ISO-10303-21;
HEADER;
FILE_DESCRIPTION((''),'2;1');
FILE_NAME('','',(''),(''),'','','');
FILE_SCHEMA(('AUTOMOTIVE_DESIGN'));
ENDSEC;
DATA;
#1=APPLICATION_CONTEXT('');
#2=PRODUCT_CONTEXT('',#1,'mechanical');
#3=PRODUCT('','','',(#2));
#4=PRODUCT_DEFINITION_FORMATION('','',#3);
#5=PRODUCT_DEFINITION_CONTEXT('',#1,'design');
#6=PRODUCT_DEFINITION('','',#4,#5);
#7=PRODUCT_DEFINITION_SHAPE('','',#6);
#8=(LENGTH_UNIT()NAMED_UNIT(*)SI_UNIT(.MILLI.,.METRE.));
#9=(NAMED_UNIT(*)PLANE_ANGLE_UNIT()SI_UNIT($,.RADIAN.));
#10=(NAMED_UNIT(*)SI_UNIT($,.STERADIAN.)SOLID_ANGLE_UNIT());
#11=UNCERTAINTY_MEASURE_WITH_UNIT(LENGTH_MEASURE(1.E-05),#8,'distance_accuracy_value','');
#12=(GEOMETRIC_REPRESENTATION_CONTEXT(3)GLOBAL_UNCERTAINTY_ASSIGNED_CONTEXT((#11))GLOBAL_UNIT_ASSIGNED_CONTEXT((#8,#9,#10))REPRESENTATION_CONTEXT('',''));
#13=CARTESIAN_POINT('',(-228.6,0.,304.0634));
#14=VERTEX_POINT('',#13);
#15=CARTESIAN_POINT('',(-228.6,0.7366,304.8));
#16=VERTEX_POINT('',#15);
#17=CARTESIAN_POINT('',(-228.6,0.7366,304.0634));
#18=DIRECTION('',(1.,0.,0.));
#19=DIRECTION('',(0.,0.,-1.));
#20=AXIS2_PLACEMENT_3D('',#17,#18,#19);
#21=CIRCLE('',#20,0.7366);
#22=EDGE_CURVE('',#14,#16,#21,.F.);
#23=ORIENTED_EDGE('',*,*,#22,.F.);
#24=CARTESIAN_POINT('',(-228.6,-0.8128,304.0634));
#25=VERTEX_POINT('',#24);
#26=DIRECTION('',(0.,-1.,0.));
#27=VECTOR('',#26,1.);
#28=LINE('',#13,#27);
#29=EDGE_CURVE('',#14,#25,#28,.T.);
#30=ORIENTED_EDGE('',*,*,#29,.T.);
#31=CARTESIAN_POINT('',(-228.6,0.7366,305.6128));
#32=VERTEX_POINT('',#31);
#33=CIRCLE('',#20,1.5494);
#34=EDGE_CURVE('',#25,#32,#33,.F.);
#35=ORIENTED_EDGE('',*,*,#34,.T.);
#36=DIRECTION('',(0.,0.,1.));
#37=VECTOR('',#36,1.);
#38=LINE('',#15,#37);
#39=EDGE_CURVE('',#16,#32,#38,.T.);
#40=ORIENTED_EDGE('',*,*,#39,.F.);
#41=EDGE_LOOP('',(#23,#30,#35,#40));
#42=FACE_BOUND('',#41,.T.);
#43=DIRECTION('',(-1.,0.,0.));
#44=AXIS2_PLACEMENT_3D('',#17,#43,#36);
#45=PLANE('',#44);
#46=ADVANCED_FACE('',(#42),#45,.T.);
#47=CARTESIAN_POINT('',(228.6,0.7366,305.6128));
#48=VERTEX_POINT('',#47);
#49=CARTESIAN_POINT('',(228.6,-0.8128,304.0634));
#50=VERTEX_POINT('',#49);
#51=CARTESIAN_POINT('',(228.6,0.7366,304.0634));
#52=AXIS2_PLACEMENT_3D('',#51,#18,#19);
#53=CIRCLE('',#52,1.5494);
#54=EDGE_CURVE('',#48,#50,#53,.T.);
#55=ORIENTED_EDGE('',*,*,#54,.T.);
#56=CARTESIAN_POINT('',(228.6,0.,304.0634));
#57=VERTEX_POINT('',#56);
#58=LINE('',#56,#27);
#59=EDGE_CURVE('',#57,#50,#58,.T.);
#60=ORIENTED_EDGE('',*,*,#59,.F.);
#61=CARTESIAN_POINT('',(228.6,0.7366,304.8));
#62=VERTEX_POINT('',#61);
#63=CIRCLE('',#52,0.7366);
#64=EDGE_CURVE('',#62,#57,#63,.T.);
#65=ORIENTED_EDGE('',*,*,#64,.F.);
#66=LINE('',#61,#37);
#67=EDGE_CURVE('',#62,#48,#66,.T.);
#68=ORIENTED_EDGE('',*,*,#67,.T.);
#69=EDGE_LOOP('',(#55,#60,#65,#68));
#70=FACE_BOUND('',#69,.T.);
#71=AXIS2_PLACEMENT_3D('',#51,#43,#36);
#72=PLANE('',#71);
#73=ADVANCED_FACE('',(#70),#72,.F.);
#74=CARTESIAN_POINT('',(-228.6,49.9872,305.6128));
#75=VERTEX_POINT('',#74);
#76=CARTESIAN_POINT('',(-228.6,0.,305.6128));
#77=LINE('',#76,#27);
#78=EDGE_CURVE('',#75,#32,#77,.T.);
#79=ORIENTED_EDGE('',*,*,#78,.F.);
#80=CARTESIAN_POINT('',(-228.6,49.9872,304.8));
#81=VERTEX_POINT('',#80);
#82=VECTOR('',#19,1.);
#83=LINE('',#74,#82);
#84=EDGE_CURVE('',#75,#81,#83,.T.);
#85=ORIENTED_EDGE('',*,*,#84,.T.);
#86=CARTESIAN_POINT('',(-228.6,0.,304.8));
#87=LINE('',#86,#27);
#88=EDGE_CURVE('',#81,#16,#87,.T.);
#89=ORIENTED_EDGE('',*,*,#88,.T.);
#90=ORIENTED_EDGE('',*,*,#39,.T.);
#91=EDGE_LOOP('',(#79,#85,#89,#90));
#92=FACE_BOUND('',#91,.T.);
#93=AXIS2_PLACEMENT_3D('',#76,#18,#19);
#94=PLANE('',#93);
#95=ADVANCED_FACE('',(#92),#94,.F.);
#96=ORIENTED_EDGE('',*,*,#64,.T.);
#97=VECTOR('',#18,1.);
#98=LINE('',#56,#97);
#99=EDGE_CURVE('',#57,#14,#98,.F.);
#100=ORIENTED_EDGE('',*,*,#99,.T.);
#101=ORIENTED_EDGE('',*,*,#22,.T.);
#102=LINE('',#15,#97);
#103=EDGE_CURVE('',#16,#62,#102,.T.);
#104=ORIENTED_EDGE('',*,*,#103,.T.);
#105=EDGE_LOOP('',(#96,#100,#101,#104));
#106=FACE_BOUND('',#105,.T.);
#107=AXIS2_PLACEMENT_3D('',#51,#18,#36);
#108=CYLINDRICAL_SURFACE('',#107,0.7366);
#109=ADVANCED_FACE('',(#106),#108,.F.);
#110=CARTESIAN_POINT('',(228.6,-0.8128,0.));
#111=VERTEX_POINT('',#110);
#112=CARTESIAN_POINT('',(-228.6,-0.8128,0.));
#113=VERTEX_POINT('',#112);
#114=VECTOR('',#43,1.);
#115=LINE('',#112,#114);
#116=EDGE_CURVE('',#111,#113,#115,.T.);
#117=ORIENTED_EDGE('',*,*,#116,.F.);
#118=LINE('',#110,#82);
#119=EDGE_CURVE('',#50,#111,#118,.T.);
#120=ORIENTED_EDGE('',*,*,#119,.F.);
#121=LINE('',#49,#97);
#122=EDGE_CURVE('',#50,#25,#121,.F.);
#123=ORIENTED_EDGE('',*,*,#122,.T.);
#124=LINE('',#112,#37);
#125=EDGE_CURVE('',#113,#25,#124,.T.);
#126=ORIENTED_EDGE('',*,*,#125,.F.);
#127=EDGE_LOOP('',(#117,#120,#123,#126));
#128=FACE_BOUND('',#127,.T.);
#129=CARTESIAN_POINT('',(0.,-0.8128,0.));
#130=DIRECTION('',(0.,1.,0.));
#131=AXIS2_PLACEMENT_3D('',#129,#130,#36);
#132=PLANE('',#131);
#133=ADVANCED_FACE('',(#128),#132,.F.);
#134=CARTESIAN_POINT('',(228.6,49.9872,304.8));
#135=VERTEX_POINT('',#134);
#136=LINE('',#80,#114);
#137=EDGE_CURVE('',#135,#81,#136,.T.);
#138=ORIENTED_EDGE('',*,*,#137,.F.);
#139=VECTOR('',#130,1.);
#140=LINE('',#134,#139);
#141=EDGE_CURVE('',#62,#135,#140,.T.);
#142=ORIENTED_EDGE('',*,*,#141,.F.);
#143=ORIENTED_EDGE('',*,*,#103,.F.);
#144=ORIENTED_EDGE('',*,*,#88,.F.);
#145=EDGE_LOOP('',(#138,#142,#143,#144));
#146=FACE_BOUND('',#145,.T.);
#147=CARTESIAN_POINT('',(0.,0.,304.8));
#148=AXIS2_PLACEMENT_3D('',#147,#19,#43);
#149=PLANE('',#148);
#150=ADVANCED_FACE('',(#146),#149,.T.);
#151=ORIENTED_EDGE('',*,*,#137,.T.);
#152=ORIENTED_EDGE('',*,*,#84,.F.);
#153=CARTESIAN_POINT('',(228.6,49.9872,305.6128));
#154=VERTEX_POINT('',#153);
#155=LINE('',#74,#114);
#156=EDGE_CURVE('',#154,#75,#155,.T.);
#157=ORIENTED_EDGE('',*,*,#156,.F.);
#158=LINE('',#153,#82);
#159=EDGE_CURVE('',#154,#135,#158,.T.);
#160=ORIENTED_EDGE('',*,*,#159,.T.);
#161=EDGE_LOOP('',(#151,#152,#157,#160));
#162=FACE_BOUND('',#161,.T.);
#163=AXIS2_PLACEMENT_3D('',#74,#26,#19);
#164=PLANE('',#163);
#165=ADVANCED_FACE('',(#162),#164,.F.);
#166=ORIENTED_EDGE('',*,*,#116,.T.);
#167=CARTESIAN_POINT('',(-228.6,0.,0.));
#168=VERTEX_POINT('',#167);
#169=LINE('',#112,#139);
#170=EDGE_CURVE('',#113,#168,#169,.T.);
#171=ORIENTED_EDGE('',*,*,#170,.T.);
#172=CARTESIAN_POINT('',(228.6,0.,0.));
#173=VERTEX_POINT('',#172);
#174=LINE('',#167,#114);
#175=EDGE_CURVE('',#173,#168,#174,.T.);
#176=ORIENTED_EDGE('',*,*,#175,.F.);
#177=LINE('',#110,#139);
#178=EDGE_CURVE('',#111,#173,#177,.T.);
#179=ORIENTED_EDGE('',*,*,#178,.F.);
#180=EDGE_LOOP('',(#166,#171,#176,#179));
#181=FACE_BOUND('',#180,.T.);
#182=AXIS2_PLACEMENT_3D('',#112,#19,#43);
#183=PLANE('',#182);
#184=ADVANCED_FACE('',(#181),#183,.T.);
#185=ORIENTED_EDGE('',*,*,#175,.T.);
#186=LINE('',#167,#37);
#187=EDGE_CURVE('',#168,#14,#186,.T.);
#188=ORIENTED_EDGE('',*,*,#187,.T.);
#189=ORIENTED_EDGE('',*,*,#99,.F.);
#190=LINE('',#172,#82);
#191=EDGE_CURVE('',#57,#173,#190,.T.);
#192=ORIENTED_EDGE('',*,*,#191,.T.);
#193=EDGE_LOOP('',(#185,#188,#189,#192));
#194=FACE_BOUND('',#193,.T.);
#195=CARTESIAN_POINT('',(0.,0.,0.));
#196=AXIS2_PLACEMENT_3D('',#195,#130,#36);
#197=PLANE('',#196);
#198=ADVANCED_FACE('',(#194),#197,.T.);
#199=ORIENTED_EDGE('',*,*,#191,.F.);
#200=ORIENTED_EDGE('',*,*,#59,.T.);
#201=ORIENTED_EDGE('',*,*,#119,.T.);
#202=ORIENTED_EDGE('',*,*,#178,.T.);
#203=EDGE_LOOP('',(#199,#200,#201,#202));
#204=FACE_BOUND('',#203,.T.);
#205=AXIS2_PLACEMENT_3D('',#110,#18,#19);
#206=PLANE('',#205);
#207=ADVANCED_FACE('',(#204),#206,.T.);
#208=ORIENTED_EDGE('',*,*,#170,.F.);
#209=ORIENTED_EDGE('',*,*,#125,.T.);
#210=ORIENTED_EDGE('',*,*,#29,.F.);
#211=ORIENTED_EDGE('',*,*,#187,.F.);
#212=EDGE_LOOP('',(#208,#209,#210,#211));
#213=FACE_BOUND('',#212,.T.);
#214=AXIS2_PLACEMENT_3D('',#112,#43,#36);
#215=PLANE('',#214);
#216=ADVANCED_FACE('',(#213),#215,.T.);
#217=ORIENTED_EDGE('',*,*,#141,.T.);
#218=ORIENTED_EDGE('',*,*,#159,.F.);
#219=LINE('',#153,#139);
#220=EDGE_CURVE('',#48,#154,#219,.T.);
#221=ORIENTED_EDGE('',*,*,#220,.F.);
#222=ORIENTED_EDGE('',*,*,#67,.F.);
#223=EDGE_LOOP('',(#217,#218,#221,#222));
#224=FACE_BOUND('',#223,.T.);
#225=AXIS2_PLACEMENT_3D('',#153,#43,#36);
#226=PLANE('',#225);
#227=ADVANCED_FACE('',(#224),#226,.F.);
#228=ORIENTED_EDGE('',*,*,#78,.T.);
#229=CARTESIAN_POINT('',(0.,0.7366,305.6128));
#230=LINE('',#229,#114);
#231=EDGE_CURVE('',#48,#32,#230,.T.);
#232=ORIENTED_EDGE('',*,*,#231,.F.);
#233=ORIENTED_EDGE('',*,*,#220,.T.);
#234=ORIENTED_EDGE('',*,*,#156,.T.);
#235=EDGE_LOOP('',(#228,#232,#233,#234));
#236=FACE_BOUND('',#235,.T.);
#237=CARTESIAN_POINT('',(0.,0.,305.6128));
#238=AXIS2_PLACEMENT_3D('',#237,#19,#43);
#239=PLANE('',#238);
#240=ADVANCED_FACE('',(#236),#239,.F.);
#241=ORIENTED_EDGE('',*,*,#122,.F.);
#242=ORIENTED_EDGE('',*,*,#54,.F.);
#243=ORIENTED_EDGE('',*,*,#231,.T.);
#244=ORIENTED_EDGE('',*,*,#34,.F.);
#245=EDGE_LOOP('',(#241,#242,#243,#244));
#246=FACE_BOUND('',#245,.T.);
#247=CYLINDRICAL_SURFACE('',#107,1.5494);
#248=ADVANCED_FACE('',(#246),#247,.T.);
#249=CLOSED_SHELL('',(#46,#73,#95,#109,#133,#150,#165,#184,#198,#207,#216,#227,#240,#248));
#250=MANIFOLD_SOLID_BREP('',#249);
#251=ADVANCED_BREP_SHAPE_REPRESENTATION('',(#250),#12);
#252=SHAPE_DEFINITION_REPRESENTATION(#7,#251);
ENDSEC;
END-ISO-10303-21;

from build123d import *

# Parameters (mm, degrees)
SKETCH1_W                    = 457.2
SKETCH1_H                    = 304.8
BASE_FLANGE1_DEPTH           = 0.8128
EDGE_FLANGE1_STRIP_W         = 4.7244
EDGE_FLANGE1_STRIP_H         = 0.8128
EDGE_FLANGE1_STRIP_CUT_DEPTH = 457.2
EDGE_FLANGE1_DEPTH           = 457.2


# Sheet-metal steps are written as plain solids
with BuildPart() as part:
    # Sketch1 → Base-Flange1 (new body)
    with BuildSketch(Plane(origin=(0, 0, 0), x_dir=(1, 0, 0), z_dir=(0, 1, 0))):
        with Locations((0, -152.4)):
            Rectangle(SKETCH1_W, SKETCH1_H)
    extrude(amount=-BASE_FLANGE1_DEPTH)

    # Edge-Flange1 strip (across the edge) → Edge-Flange1 strip cut (cut)
    with BuildSketch(Plane(origin=(-228.6, 0, 304.8), x_dir=(0, 0, -1), z_dir=(1, 0, 0))):
        with Locations((-1.6256, -0.4064)):
            Rectangle(EDGE_FLANGE1_STRIP_W, EDGE_FLANGE1_STRIP_H)
    extrude(amount=EDGE_FLANGE1_STRIP_CUT_DEPTH, mode=Mode.SUBTRACT)

    # Edge-Flange1 section (across the edge) → Edge-Flange1 (add)
    with BuildSketch(Plane(origin=(-228.6, 0, 304.8), x_dir=(0, 0, -1), z_dir=(1, 0, 0))):
        with BuildLine():
            Line((-0.8128, 0.7366), (-0.8128, 49.9872))
            Line((-0.8128, 49.9872), (0, 49.9872))
            Line((0, 49.9872), (0, 0.7366))
            ThreePointArc((0, 0.7366), (0.215745145, 0.215745145), (0.7366, 0))
            Line((0.7366, 0), (0.7366, -0.8128))
            ThreePointArc((0.7366, -0.8128), (-0.358991247, -0.358991247), (-0.8128, 0.7366))
        make_face()
    extrude(amount=EDGE_FLANGE1_DEPTH)


solid = part.part
